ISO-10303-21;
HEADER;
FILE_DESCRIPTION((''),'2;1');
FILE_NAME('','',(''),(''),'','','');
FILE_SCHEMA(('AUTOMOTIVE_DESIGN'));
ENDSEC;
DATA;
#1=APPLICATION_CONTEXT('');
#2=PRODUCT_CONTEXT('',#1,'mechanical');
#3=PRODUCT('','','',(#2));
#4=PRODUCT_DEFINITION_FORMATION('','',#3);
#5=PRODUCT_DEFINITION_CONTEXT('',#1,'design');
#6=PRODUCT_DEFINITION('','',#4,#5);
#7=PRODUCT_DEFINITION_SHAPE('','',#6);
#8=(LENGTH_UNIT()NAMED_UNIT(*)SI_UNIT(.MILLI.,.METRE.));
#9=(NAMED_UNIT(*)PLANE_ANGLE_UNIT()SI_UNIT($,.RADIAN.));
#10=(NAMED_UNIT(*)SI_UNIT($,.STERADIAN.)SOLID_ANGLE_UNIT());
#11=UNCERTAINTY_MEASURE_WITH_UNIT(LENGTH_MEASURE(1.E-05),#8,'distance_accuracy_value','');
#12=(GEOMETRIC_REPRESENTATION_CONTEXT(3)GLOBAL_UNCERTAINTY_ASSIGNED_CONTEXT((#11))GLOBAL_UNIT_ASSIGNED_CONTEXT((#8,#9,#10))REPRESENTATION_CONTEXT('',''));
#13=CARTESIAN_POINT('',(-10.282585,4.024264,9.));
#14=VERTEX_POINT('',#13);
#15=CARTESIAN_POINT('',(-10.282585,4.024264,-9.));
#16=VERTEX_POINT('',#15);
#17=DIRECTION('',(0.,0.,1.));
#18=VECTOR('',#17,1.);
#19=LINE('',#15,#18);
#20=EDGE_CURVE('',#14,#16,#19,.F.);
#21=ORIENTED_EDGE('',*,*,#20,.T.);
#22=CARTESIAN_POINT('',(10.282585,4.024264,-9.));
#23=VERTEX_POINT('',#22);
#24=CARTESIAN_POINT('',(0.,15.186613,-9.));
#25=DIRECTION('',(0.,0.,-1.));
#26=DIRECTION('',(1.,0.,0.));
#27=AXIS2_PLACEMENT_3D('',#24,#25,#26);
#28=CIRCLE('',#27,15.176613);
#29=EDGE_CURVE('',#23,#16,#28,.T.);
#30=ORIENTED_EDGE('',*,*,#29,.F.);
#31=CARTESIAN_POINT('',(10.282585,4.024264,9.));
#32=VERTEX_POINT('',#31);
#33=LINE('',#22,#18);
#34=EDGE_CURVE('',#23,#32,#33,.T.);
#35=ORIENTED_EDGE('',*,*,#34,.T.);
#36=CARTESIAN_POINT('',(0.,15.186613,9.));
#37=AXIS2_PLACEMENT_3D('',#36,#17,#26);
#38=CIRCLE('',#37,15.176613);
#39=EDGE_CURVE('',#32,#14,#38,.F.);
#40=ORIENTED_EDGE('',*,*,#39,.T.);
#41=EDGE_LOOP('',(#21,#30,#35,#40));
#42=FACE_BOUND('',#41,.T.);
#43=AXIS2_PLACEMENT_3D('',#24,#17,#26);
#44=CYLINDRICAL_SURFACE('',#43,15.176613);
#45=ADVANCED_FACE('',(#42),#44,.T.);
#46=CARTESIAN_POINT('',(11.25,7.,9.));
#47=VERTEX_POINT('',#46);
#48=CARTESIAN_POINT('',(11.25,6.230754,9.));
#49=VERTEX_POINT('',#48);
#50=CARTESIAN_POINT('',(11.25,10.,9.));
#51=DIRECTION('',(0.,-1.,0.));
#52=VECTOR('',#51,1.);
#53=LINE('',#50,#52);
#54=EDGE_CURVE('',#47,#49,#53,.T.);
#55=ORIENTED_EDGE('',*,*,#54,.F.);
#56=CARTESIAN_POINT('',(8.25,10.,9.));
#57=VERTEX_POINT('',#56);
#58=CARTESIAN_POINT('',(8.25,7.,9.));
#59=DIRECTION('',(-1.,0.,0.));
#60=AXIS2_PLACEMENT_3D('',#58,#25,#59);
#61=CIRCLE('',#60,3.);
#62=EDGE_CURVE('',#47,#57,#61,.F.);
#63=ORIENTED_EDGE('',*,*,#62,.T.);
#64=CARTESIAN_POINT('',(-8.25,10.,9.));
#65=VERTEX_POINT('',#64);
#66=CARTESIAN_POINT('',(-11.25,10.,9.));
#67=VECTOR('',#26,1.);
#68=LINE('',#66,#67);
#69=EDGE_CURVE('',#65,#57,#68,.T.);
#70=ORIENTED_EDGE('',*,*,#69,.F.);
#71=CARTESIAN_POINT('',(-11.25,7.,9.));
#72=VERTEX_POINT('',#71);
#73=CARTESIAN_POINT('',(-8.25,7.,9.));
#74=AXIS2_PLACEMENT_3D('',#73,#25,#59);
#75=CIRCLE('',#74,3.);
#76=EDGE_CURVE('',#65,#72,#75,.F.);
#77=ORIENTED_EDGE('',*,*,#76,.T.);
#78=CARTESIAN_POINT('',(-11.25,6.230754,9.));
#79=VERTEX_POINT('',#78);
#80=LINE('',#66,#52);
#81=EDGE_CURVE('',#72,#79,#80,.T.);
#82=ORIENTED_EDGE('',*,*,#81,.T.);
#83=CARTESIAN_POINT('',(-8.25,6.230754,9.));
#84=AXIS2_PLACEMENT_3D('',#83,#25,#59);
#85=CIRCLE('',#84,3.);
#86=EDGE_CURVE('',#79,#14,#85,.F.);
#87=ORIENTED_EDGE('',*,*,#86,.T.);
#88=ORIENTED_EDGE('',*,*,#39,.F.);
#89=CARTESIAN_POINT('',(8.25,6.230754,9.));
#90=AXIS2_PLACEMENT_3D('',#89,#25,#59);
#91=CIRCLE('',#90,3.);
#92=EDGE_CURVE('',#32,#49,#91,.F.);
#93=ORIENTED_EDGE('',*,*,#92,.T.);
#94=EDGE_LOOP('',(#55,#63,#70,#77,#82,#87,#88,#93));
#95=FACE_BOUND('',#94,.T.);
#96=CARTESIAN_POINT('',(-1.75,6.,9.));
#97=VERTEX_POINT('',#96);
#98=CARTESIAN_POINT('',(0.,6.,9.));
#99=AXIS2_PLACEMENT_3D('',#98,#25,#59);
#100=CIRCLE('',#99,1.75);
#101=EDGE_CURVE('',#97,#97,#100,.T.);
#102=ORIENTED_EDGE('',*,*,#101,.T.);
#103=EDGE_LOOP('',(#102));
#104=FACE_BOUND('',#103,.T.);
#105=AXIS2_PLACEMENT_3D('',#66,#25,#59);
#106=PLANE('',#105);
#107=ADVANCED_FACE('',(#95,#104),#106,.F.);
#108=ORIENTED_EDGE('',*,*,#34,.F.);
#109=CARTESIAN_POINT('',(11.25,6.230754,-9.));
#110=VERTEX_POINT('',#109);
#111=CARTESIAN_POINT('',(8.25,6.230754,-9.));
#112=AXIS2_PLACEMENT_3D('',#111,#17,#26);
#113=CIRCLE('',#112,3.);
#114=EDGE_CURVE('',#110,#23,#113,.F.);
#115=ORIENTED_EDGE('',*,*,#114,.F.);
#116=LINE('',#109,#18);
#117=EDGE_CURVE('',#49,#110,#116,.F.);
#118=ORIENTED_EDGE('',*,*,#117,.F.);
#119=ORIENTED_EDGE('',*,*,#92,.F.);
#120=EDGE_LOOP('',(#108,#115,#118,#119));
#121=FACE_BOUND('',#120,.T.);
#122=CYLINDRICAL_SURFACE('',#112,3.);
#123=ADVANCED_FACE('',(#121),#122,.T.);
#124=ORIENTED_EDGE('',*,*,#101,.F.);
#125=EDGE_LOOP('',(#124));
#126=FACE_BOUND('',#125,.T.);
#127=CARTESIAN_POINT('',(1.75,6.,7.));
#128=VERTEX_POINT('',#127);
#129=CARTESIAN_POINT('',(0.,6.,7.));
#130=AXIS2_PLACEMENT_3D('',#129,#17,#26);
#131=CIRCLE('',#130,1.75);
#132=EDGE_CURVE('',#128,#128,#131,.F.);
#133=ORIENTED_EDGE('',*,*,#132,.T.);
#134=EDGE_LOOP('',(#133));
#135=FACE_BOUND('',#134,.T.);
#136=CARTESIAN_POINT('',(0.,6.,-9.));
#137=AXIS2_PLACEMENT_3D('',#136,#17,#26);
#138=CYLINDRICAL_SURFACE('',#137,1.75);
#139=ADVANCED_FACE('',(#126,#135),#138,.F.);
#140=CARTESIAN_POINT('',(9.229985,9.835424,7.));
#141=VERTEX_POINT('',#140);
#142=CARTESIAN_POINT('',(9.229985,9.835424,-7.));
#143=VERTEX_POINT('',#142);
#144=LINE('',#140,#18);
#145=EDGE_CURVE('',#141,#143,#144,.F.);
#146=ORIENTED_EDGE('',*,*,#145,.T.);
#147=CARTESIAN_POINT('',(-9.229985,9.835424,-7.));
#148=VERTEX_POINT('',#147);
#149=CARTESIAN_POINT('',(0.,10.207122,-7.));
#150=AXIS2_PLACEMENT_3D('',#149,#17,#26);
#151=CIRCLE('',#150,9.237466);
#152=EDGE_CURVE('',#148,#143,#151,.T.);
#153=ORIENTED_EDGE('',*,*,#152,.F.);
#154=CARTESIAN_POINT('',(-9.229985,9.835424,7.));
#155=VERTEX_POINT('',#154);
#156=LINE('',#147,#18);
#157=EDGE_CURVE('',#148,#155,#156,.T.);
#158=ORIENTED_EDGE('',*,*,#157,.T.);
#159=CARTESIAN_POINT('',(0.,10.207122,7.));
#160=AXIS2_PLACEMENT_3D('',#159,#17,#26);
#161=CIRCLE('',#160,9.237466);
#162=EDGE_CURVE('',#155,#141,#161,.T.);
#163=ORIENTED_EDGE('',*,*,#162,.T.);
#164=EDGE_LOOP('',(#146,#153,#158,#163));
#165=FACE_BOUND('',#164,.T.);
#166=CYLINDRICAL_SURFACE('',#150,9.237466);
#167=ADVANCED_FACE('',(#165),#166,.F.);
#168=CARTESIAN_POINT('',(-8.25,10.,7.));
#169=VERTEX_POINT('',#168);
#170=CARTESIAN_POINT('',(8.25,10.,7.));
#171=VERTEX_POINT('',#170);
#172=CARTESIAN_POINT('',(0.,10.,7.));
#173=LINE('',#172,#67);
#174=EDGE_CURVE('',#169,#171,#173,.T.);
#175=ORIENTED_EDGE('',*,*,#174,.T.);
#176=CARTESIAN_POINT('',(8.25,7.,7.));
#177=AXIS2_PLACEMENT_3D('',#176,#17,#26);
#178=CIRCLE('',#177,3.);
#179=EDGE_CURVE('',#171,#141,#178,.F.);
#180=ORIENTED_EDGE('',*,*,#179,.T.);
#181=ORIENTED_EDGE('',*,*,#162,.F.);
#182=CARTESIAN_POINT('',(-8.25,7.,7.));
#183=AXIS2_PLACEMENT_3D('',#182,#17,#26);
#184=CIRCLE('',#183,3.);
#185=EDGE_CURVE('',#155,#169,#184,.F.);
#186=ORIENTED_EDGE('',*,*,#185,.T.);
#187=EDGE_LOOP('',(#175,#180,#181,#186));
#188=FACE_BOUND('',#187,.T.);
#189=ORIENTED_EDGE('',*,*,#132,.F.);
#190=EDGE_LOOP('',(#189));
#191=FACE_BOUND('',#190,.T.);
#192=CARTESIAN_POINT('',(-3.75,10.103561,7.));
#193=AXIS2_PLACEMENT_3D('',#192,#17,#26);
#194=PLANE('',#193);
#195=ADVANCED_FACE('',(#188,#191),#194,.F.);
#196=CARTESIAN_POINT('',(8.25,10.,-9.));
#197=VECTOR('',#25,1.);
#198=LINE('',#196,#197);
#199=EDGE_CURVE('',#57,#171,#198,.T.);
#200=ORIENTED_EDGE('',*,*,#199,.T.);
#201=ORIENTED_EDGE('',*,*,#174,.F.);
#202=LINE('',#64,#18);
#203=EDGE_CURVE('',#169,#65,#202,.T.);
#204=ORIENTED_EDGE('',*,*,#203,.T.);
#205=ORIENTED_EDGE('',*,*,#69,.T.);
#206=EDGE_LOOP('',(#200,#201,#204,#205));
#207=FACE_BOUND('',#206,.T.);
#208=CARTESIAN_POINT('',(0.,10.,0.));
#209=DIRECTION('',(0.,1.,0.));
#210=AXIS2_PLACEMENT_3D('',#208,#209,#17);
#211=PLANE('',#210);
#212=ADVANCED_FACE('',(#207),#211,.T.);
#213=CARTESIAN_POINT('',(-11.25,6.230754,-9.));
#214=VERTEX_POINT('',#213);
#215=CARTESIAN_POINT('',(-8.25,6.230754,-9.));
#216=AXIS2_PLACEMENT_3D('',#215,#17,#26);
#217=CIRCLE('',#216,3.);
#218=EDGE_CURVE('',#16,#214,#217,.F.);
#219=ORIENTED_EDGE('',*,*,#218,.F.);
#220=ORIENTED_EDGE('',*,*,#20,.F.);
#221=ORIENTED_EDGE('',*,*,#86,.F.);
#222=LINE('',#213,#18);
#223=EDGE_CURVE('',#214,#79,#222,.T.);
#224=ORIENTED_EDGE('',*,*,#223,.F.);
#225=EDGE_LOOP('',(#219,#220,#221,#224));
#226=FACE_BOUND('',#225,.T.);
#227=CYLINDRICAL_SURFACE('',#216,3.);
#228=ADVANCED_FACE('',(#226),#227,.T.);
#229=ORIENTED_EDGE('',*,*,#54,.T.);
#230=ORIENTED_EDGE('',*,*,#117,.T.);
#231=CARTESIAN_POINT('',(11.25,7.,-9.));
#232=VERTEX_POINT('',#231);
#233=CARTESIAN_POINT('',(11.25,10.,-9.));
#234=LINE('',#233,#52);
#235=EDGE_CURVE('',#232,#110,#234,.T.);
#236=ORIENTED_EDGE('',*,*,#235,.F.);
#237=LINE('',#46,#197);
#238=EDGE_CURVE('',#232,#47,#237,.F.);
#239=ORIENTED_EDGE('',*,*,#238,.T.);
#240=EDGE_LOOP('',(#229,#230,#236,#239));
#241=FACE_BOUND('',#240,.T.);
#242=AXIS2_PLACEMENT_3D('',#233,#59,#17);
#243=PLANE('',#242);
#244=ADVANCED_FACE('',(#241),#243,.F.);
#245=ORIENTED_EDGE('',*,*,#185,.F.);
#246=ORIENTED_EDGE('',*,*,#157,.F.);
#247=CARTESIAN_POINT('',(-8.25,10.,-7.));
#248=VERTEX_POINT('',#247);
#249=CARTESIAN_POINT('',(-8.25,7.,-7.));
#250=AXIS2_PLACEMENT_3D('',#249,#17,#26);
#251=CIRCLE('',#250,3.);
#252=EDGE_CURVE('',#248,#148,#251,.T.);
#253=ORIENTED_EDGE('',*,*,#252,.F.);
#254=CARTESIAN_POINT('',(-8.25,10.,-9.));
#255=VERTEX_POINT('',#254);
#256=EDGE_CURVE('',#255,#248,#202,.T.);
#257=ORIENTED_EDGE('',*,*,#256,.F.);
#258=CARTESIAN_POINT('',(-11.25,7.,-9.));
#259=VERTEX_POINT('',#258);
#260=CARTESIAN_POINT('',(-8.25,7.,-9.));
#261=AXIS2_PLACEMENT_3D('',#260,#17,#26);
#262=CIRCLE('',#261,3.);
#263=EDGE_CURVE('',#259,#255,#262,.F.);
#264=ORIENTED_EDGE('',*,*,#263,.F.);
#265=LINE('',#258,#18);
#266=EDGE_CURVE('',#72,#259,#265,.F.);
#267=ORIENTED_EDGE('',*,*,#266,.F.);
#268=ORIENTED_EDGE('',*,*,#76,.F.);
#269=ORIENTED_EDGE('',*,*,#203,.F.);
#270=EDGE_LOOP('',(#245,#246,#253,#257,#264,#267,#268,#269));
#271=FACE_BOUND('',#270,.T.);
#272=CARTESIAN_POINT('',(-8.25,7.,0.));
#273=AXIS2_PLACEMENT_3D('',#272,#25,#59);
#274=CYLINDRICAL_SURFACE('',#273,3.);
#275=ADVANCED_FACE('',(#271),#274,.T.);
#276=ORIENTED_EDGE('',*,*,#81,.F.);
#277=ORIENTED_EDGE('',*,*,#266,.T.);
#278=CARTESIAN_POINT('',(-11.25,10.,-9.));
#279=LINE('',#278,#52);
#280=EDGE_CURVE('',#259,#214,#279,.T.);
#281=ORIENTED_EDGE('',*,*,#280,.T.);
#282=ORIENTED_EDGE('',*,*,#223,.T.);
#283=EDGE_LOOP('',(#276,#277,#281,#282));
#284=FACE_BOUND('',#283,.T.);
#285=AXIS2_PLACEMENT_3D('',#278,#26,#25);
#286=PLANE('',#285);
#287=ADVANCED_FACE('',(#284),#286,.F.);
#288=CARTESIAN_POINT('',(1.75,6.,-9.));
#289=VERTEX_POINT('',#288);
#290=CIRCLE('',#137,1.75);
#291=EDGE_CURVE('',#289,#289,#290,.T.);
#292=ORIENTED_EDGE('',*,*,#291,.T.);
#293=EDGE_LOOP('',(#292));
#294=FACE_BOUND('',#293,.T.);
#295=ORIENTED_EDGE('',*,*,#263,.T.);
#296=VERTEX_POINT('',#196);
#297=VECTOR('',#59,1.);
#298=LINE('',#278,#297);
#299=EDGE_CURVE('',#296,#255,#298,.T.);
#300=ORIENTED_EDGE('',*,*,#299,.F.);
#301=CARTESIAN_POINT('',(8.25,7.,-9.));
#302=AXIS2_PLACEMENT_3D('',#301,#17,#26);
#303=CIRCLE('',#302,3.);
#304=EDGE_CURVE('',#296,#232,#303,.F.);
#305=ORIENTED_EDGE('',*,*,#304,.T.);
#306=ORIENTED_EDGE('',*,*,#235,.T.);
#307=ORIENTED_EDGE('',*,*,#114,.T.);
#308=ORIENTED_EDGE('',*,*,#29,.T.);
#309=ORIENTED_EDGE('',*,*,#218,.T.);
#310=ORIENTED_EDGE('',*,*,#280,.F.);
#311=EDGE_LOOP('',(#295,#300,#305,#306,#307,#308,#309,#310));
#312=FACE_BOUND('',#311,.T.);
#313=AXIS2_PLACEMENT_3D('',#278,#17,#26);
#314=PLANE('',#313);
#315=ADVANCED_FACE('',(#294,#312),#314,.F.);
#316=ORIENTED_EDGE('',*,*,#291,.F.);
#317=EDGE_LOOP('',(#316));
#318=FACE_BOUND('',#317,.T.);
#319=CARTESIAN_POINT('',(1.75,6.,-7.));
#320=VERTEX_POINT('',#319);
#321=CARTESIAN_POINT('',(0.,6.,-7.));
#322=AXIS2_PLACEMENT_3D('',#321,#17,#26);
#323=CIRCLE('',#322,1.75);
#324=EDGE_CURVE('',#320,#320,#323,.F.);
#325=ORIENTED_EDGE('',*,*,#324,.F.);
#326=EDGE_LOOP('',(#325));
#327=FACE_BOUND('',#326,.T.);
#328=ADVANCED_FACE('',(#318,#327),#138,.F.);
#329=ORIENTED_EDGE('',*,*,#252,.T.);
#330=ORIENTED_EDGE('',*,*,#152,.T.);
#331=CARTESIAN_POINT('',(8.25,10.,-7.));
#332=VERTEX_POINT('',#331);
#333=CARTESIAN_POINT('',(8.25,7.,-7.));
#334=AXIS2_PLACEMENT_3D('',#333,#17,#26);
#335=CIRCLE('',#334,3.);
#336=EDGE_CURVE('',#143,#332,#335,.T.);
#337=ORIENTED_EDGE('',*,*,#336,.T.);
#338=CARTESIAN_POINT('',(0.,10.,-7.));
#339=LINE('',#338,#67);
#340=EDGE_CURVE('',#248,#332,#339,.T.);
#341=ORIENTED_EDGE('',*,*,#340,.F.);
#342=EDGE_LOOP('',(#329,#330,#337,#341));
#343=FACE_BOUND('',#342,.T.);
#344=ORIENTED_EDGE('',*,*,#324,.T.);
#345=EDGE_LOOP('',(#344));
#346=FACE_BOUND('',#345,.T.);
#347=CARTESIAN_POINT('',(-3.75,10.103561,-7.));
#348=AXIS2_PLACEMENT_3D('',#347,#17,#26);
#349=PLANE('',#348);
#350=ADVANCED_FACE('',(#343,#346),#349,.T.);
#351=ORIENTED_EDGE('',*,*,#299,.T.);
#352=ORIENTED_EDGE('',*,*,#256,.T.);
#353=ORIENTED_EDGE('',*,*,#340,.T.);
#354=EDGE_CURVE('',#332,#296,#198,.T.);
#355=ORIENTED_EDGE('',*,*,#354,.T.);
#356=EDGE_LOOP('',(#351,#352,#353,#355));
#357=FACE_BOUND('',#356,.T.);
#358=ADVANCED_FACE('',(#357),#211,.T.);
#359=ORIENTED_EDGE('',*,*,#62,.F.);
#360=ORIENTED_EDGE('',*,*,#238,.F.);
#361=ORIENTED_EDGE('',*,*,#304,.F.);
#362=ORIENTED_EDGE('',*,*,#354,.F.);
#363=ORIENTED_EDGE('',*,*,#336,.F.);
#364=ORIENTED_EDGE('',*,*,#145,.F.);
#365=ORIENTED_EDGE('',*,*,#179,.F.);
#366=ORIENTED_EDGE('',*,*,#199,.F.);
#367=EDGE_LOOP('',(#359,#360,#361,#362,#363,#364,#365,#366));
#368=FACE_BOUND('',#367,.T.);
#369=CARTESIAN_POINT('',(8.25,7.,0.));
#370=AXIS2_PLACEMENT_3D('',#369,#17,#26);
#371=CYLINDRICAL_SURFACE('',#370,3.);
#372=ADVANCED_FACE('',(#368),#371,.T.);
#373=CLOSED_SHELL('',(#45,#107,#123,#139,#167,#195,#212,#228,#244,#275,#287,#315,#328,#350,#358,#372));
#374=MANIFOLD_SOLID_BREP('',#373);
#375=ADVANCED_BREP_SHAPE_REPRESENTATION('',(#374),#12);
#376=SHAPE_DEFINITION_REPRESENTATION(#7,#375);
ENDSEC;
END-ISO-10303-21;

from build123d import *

# Parameters (mm, degrees)
SKETCH1_W               = 22.5
SKETCH1_H               = 18
BOSS_EXTRUDE1_DEPTH     = 10
CUT_EXTRUDE1_DEPTH      = 24.464068275
CUT_EXTRUDE1_DEPTH_BACK = 24.464068275
SKETCH2_R               = 1.75
CUT_EXTRUDE2_DEPTH      = 14
CUT_EXTRUDE3_REACH      = 19.532
SKETCH4_W               = 11.529065942
SKETCH4_H               = 14
FILLET1_R               = 3


with BuildPart() as part:
    # Sketch1 → Boss-Extrude1 (new body)
    with BuildSketch(Plane(origin=(0, 0, 0), x_dir=(1, 0, 0), z_dir=(0, 1, 0))):
        Rectangle(SKETCH1_W, SKETCH1_H)
    extrude(amount=BOSS_EXTRUDE1_DEPTH)

    # Sketch2 → Cut-Extrude1 (cut, two sides: drawn at the far end of the back side and taken through both)
    with BuildSketch(Plane.XY.offset(9).offset(-CUT_EXTRUDE1_DEPTH_BACK)):
        with Locations((0, 6)):
            Circle(SKETCH2_R)
        with BuildLine():
            Line((-11.25, 5), (-11.25, 0))
            Line((-11.25, 0), (11.25, 0))
            Line((11.25, 0), (11.25, 5))
            ThreePointArc((11.25, 5), (0, 0.01), (-11.25, 5))
        make_face()
    extrude(amount=CUT_EXTRUDE1_DEPTH + CUT_EXTRUDE1_DEPTH_BACK, mode=Mode.SUBTRACT)

    # Sketch3 → Cut-Extrude2 (cut)
    with BuildSketch(Plane.XY.offset(7)):
        with BuildLine():
            ThreePointArc((-9.233945582, 9.952114837), (0, 0.969656164), (9.233945582, 9.952114837))
            ThreePointArc((9.233945582, 9.952114837), (7.547885163, 11.733945582), (5.766054418, 10.047885163))
            ThreePointArc((5.766054418, 10.047885163), (0, 4.438869486), (-5.766054418, 10.047885163))
            ThreePointArc((-5.766054418, 10.047885163), (-7.547885163, 11.733945582), (-9.233945582, 9.952114837))
        make_face()
    extrude(amount=-CUT_EXTRUDE2_DEPTH, mode=Mode.SUBTRACT)

    # Sketch4 → Cut-Extrude3 (cut, up to next)
    with BuildSketch(Plane(origin=(0, 10, 0), x_dir=(1, 0, 0), z_dir=(0, 1, 0)), mode=Mode.PRIVATE) as cut_extrude3_sk1:
        Rectangle(SKETCH4_W, SKETCH4_H)
    cut_extrude3_tool1 = extrude(cut_extrude3_sk1.sketch, amount=-CUT_EXTRUDE3_REACH, mode=Mode.PRIVATE) & part.part
    add(cut_extrude3_tool1.solids().sort_by_distance((0, 10, 0))[0], mode=Mode.SUBTRACT)

    # Fillet1
    # the kernel refuses this fillet: 3 mm, written as the material it takes off along each edge
    with BuildSketch(Plane(origin=(11.25, 5, 12.435069568), x_dir=(0, 1, 0), z_dir=(0, 0, -1))) as fillet1_piece_1:
        with BuildLine():
            CenterArc((1.230754269, -3), FILLET1_R, 90, 47.349204062)
            ThreePointArc((-0.975735859, -0.967415115), (-0.498821765, -0.472659508), (0, 0))
            Line((0, 0), (1.230754269, 0))
        make_face()
    extrude(amount=24.870139136, mode=Mode.SUBTRACT)
    with BuildSketch(Plane(origin=(-11.25, 5, 12.435069568), x_dir=(0, 1, 0), z_dir=(0, 0, -1))) as fillet1_piece_2:
        with BuildLine():
            CenterArc((1.230754269, 3), FILLET1_R, 222.650795938, 47.349204062)
            ThreePointArc((-0.975735859, 0.967415115), (-0.498821765, 0.472659508), (0, 0))
            Line((0, 0), (1.230754269, 0))
        make_face()
    extrude(amount=24.870139136, mode=Mode.SUBTRACT)
    with BuildSketch(Plane(origin=(11.25, 10, -16.5), x_dir=(-1, 0, 0), z_dir=(0, 0, 1))) as fillet1_piece_3:
        with BuildLine():
            CenterArc((FILLET1_R, FILLET1_R), FILLET1_R, 180, 90)
            Line((0, FILLET1_R), (0, 0))
            Line((0, 0), (FILLET1_R, 0))
        make_face()
    extrude(amount=33, mode=Mode.SUBTRACT)
    with BuildSketch(Plane(origin=(-11.25, 10, 16.5), x_dir=(0, -1, 0), z_dir=(0, 0, -1))) as fillet1_piece_4:
        with BuildLine():
            CenterArc((FILLET1_R, -FILLET1_R), FILLET1_R, 90, 90)
            Line((0, -FILLET1_R), (0, 0))
            Line((0, 0), (FILLET1_R, 0))
        make_face()
    extrude(amount=33, mode=Mode.SUBTRACT)


solid = part.part
